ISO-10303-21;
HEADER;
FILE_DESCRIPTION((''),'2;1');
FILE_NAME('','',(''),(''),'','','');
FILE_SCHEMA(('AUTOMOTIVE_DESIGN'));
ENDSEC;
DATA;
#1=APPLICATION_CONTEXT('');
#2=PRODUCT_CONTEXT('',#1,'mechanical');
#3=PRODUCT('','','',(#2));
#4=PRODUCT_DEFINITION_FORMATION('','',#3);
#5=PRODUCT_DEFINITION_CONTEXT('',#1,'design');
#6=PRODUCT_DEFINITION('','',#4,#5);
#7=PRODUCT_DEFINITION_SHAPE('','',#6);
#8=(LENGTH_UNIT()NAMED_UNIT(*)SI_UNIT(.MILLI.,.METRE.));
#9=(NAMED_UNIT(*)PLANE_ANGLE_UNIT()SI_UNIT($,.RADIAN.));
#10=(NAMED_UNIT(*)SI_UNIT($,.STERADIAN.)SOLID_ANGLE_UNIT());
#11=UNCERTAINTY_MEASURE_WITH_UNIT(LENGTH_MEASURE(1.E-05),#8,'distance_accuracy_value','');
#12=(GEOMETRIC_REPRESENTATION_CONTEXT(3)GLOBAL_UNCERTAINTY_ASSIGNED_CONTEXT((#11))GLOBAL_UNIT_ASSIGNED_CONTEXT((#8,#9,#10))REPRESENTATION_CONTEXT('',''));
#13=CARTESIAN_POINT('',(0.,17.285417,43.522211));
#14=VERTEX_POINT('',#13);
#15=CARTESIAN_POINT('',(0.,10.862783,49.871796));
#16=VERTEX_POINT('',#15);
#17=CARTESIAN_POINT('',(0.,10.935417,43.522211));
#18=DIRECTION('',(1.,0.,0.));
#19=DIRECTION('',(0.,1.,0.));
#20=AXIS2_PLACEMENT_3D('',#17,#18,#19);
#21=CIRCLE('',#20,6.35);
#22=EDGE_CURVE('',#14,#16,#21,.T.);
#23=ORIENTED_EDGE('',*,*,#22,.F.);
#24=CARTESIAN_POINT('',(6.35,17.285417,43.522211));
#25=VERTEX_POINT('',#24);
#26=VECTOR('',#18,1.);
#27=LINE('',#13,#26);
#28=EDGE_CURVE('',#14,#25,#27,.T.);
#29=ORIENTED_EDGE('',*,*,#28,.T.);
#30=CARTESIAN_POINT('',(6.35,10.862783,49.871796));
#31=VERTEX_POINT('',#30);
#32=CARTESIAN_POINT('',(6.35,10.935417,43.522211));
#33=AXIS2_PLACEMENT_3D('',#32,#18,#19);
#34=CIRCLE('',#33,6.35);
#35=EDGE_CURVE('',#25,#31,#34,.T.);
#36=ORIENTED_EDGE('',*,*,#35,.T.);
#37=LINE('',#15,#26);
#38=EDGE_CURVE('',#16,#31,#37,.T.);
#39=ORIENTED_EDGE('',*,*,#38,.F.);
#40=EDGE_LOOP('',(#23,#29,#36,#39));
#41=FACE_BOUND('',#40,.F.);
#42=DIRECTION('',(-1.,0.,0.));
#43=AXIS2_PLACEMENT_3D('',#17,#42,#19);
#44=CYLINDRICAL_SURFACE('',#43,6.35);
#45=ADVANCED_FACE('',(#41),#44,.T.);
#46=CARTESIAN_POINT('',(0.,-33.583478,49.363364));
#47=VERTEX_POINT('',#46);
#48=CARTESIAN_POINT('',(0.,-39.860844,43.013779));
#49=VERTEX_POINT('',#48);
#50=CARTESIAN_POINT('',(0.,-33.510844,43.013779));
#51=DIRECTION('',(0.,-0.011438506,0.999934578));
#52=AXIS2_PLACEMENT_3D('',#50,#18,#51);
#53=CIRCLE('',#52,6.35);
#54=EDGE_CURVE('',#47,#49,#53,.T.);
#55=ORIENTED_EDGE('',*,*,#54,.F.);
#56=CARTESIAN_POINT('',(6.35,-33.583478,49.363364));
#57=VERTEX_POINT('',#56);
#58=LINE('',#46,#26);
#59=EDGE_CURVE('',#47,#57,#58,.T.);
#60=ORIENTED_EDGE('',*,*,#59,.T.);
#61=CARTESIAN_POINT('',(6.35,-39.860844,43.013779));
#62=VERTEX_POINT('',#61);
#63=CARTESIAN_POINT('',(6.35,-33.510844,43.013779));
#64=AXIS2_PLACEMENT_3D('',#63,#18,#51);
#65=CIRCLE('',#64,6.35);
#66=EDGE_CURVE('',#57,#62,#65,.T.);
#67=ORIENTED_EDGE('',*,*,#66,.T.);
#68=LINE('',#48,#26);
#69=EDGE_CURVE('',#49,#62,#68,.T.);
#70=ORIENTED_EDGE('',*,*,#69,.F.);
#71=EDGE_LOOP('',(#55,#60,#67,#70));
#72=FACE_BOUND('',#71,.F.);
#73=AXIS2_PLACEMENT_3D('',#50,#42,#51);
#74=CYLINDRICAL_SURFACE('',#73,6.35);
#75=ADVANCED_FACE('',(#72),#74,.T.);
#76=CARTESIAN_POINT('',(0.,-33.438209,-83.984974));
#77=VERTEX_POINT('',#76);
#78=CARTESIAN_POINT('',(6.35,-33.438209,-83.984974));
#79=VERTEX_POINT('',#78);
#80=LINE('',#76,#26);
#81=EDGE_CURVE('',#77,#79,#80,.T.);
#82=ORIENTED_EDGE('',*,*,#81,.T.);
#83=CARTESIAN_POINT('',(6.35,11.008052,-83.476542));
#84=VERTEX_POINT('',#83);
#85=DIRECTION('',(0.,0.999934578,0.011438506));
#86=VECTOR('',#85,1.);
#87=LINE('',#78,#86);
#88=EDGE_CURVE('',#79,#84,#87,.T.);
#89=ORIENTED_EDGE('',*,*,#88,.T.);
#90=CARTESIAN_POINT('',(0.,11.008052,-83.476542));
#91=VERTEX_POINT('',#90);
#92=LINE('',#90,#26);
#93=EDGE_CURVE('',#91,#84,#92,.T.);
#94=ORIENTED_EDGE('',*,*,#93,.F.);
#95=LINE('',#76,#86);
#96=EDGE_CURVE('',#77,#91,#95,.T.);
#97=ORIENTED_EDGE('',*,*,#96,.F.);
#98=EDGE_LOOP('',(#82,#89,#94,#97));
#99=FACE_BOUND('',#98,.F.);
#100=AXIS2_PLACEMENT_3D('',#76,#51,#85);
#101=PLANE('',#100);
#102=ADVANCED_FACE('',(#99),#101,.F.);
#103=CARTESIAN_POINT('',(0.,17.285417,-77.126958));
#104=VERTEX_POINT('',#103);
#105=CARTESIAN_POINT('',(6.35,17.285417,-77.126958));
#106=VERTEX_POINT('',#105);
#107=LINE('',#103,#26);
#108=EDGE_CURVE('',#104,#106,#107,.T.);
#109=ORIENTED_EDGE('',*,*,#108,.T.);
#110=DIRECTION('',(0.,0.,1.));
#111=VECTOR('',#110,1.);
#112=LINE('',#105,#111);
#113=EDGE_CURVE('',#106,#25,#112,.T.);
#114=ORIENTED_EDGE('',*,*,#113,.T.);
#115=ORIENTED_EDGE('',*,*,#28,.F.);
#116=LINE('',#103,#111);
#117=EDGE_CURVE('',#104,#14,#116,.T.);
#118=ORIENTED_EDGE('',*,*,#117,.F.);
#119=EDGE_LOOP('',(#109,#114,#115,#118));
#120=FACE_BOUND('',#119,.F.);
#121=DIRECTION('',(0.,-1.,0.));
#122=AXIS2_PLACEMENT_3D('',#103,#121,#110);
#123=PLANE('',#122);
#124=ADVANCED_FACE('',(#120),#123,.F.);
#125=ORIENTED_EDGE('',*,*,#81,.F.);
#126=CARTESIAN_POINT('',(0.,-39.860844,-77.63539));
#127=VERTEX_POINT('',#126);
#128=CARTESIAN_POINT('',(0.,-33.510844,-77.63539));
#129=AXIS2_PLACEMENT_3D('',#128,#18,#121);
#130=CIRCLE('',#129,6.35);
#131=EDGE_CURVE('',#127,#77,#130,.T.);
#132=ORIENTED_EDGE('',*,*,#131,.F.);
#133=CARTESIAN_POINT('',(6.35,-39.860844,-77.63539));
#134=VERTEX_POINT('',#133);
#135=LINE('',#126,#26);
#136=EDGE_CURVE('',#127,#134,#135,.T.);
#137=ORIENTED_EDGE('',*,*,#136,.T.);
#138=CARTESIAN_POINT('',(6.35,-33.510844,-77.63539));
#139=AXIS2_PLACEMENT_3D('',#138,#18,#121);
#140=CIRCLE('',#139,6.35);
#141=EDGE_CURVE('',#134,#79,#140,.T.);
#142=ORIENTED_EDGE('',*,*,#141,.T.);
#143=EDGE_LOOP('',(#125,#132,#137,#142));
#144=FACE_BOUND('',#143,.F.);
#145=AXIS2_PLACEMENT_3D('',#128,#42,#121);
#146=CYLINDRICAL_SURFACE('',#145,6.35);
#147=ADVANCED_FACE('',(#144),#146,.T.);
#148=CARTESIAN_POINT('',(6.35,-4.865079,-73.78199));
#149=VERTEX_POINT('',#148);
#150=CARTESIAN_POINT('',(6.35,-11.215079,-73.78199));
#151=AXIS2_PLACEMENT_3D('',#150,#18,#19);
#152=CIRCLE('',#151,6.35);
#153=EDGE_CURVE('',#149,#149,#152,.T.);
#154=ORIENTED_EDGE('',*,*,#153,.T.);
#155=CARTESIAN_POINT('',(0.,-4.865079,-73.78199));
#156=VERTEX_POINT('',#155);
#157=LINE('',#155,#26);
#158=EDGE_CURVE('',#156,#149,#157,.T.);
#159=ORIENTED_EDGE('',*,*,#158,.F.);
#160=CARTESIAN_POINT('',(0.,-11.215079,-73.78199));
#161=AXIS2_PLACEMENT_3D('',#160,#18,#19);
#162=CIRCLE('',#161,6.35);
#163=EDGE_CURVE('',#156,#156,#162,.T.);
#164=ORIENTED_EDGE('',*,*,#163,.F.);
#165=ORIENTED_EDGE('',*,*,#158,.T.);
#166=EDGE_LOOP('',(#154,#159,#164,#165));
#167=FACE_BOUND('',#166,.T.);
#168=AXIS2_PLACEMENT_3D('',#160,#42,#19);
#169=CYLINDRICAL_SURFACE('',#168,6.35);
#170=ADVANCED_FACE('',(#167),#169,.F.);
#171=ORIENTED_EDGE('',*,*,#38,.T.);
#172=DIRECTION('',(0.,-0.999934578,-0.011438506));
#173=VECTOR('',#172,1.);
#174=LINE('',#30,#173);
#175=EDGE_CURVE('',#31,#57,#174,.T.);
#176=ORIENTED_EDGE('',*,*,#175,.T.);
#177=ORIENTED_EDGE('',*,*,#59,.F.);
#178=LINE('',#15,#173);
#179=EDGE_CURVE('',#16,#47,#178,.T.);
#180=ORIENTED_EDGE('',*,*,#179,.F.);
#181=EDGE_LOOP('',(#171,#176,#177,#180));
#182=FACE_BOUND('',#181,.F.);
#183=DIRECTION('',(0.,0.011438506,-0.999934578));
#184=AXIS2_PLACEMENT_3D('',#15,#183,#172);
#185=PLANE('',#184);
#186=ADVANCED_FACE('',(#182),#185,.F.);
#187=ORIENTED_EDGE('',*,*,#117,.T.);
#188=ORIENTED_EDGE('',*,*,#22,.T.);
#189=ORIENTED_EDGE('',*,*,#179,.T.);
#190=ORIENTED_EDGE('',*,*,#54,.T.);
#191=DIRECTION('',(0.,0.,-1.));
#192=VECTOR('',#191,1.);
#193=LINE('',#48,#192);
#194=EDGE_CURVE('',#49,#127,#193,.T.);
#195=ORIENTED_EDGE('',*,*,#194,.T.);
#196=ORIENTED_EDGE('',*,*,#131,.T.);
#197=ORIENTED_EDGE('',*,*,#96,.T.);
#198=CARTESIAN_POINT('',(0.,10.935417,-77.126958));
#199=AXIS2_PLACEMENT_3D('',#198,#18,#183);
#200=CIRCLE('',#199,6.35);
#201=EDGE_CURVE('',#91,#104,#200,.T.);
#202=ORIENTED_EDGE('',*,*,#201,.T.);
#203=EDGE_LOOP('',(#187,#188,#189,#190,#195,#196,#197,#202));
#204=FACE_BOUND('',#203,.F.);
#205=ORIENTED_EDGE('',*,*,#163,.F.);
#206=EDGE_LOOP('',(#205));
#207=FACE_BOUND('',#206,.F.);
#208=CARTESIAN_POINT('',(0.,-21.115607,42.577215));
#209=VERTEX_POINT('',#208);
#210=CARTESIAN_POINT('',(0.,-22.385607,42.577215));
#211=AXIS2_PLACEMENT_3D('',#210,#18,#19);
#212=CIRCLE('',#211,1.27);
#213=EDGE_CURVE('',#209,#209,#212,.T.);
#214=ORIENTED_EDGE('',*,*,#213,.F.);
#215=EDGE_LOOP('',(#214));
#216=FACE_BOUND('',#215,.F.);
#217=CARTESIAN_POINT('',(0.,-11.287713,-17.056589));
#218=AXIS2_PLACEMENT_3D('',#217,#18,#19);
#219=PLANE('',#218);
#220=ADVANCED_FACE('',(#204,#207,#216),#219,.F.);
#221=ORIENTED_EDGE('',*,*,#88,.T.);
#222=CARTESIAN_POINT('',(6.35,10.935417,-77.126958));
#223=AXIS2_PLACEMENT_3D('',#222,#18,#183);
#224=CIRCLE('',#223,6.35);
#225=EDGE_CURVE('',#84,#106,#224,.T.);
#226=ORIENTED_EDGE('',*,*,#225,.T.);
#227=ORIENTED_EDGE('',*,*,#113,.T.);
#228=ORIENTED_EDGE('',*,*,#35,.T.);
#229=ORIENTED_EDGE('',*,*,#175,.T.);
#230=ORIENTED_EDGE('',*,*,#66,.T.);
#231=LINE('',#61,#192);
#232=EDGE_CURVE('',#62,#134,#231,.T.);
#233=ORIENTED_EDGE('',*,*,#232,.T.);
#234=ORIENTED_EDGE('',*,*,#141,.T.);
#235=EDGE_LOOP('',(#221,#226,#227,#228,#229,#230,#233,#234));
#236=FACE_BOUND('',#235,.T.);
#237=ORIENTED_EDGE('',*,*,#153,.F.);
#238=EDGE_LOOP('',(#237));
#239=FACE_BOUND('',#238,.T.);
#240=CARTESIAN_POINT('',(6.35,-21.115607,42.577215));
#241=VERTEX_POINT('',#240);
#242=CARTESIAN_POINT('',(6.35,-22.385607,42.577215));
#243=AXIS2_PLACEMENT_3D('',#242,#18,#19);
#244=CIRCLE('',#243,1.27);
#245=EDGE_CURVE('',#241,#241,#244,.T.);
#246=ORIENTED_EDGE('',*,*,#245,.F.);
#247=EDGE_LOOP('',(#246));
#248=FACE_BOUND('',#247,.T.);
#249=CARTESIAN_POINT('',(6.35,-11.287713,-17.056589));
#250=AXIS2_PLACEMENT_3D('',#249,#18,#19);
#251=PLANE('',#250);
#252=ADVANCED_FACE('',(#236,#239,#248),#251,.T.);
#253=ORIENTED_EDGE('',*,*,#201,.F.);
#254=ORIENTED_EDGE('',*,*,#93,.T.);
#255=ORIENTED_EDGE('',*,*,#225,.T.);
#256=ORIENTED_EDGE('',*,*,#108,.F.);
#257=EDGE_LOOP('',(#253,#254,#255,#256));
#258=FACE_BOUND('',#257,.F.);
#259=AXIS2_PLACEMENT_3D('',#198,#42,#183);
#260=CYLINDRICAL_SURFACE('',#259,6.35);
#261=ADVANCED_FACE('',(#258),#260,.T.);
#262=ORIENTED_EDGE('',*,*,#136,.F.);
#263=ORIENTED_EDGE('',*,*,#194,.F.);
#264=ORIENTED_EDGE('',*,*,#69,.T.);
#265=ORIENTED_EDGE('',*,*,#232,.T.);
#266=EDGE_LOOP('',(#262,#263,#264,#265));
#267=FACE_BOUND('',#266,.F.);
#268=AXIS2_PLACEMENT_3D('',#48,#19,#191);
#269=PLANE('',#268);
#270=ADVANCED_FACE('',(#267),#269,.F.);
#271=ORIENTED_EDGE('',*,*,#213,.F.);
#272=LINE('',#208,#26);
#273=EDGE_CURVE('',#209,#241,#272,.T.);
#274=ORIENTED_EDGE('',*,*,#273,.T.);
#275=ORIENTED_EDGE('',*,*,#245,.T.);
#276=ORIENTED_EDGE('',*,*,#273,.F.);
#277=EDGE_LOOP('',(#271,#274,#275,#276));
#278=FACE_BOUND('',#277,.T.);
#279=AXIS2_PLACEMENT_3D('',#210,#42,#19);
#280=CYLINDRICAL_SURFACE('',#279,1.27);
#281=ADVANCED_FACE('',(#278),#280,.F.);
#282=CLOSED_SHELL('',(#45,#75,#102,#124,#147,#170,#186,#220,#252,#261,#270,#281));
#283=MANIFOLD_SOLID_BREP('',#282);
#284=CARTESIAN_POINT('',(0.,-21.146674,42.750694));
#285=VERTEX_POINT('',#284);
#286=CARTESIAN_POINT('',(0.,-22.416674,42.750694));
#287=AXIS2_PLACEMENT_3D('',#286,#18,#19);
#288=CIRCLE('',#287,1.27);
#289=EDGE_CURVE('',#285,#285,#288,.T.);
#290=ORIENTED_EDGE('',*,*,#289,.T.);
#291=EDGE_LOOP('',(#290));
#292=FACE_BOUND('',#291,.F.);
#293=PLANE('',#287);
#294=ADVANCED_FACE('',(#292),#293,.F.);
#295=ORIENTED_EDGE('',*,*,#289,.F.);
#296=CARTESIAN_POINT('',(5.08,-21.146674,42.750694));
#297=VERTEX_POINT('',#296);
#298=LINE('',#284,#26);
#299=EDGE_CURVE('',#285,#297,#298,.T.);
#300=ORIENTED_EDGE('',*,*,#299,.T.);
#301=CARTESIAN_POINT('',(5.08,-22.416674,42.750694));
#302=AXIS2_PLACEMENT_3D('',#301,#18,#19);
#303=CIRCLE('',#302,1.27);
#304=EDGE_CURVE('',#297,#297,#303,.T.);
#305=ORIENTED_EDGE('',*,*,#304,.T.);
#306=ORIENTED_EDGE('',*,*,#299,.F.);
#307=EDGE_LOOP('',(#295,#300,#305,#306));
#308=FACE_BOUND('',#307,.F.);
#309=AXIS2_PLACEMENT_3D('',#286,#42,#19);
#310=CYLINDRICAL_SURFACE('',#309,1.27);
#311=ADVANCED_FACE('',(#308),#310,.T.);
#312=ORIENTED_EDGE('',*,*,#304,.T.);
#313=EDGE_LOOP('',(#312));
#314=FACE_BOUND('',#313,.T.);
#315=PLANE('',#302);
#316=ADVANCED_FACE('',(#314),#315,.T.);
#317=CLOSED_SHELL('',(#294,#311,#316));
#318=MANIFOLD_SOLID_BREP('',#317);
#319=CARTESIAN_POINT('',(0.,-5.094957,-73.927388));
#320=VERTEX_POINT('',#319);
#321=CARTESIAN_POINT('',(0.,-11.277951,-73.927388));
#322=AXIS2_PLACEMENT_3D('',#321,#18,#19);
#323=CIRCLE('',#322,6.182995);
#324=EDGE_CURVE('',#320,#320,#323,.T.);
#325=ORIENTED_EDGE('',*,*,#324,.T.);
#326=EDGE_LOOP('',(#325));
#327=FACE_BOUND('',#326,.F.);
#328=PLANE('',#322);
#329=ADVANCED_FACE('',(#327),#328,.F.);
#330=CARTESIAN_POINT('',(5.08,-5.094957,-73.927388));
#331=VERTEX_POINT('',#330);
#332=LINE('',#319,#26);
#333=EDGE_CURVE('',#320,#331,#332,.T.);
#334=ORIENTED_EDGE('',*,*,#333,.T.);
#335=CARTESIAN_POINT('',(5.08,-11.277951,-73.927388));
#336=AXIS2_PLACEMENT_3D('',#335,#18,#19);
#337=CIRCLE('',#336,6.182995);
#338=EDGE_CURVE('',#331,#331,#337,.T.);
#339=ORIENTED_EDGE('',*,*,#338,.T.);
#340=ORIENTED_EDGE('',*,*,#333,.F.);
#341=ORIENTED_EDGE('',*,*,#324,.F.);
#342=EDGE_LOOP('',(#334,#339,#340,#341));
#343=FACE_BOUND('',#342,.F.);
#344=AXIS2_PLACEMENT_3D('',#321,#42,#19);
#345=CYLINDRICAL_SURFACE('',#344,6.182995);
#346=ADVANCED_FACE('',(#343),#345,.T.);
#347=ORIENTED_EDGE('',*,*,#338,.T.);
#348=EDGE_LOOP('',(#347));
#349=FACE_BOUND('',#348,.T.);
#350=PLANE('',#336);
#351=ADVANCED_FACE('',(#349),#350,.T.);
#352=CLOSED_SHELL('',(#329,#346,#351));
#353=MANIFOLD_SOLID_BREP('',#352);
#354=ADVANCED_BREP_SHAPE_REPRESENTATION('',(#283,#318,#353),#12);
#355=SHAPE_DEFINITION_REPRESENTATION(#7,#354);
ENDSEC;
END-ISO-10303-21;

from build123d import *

# Parameters (mm, degrees)
F0_R     = 6.35
F0_R_2   = 1.27
F1_DEPTH = 6.35
F2_R     = 6.1829946026
F3_DEPTH = 5.08
F2_R_2   = 1.27


# Not quite as in the source:
# - a feature of the source that left no trace in its solid (it failed there, or was rolled back) is left out


with BuildPart() as f1:
    # F0 (on Right) → F1 (new body)
    with BuildSketch(Plane.YZ):
        with BuildLine():
            Line((17.2854172051, -77.1269578294), (17.2854172051, 43.5222112587))
            ThreePointArc((17.2854172051, 43.5222112587), (15.3997912282, 48.0379464793), (10.8627826911, 49.87179583))
            Line((10.8627826911, 49.87179583), (-33.5834784501, 49.3633637362))
            ThreePointArc((-33.5834784501, 49.3633637362), (-38.0265791567, 47.4781531881), (-39.8608439361, 43.013779165))
            Line((-39.8608439361, 43.013779165), (-39.8608439361, -77.6353899231))
            ThreePointArc((-39.8608439361, -77.6353899231), (-37.9752179592, -82.1511251437), (-33.4382094221, -83.9849744944))
            Line((-33.4382094221, -83.9849744944), (11.0080517191, -83.4765424006))
            ThreePointArc((11.0080517191, -83.4765424006), (15.4511524256, -81.5913318525), (17.2854172051, -77.1269578294))
        make_face()
        with Locations((-11.2150788515, -73.7819895148)):
            Circle(F0_R, mode=Mode.SUBTRACT)
        with Locations((-22.3856065422, 42.5772145391)):
            Circle(F0_R_2, mode=Mode.SUBTRACT)
    extrude(amount=F1_DEPTH)


with BuildPart() as f3:
    # F2 (on Right) → F3 (new body)
    with BuildSketch(Plane.YZ):
        with Locations((-11.2779513001, -73.9273875952)):
            Circle(F2_R)
    extrude(amount=F3_DEPTH)


with BuildPart() as f3b:
    # F2 (on Right) → F3, piece 2 (new body)
    with BuildSketch(Plane.YZ):
        with Locations((-22.4166736007, 42.7506938577)):
            Circle(F2_R_2)
    extrude(amount=F3_DEPTH)


solid = Compound([f1.part, f3.part, f3b.part])
